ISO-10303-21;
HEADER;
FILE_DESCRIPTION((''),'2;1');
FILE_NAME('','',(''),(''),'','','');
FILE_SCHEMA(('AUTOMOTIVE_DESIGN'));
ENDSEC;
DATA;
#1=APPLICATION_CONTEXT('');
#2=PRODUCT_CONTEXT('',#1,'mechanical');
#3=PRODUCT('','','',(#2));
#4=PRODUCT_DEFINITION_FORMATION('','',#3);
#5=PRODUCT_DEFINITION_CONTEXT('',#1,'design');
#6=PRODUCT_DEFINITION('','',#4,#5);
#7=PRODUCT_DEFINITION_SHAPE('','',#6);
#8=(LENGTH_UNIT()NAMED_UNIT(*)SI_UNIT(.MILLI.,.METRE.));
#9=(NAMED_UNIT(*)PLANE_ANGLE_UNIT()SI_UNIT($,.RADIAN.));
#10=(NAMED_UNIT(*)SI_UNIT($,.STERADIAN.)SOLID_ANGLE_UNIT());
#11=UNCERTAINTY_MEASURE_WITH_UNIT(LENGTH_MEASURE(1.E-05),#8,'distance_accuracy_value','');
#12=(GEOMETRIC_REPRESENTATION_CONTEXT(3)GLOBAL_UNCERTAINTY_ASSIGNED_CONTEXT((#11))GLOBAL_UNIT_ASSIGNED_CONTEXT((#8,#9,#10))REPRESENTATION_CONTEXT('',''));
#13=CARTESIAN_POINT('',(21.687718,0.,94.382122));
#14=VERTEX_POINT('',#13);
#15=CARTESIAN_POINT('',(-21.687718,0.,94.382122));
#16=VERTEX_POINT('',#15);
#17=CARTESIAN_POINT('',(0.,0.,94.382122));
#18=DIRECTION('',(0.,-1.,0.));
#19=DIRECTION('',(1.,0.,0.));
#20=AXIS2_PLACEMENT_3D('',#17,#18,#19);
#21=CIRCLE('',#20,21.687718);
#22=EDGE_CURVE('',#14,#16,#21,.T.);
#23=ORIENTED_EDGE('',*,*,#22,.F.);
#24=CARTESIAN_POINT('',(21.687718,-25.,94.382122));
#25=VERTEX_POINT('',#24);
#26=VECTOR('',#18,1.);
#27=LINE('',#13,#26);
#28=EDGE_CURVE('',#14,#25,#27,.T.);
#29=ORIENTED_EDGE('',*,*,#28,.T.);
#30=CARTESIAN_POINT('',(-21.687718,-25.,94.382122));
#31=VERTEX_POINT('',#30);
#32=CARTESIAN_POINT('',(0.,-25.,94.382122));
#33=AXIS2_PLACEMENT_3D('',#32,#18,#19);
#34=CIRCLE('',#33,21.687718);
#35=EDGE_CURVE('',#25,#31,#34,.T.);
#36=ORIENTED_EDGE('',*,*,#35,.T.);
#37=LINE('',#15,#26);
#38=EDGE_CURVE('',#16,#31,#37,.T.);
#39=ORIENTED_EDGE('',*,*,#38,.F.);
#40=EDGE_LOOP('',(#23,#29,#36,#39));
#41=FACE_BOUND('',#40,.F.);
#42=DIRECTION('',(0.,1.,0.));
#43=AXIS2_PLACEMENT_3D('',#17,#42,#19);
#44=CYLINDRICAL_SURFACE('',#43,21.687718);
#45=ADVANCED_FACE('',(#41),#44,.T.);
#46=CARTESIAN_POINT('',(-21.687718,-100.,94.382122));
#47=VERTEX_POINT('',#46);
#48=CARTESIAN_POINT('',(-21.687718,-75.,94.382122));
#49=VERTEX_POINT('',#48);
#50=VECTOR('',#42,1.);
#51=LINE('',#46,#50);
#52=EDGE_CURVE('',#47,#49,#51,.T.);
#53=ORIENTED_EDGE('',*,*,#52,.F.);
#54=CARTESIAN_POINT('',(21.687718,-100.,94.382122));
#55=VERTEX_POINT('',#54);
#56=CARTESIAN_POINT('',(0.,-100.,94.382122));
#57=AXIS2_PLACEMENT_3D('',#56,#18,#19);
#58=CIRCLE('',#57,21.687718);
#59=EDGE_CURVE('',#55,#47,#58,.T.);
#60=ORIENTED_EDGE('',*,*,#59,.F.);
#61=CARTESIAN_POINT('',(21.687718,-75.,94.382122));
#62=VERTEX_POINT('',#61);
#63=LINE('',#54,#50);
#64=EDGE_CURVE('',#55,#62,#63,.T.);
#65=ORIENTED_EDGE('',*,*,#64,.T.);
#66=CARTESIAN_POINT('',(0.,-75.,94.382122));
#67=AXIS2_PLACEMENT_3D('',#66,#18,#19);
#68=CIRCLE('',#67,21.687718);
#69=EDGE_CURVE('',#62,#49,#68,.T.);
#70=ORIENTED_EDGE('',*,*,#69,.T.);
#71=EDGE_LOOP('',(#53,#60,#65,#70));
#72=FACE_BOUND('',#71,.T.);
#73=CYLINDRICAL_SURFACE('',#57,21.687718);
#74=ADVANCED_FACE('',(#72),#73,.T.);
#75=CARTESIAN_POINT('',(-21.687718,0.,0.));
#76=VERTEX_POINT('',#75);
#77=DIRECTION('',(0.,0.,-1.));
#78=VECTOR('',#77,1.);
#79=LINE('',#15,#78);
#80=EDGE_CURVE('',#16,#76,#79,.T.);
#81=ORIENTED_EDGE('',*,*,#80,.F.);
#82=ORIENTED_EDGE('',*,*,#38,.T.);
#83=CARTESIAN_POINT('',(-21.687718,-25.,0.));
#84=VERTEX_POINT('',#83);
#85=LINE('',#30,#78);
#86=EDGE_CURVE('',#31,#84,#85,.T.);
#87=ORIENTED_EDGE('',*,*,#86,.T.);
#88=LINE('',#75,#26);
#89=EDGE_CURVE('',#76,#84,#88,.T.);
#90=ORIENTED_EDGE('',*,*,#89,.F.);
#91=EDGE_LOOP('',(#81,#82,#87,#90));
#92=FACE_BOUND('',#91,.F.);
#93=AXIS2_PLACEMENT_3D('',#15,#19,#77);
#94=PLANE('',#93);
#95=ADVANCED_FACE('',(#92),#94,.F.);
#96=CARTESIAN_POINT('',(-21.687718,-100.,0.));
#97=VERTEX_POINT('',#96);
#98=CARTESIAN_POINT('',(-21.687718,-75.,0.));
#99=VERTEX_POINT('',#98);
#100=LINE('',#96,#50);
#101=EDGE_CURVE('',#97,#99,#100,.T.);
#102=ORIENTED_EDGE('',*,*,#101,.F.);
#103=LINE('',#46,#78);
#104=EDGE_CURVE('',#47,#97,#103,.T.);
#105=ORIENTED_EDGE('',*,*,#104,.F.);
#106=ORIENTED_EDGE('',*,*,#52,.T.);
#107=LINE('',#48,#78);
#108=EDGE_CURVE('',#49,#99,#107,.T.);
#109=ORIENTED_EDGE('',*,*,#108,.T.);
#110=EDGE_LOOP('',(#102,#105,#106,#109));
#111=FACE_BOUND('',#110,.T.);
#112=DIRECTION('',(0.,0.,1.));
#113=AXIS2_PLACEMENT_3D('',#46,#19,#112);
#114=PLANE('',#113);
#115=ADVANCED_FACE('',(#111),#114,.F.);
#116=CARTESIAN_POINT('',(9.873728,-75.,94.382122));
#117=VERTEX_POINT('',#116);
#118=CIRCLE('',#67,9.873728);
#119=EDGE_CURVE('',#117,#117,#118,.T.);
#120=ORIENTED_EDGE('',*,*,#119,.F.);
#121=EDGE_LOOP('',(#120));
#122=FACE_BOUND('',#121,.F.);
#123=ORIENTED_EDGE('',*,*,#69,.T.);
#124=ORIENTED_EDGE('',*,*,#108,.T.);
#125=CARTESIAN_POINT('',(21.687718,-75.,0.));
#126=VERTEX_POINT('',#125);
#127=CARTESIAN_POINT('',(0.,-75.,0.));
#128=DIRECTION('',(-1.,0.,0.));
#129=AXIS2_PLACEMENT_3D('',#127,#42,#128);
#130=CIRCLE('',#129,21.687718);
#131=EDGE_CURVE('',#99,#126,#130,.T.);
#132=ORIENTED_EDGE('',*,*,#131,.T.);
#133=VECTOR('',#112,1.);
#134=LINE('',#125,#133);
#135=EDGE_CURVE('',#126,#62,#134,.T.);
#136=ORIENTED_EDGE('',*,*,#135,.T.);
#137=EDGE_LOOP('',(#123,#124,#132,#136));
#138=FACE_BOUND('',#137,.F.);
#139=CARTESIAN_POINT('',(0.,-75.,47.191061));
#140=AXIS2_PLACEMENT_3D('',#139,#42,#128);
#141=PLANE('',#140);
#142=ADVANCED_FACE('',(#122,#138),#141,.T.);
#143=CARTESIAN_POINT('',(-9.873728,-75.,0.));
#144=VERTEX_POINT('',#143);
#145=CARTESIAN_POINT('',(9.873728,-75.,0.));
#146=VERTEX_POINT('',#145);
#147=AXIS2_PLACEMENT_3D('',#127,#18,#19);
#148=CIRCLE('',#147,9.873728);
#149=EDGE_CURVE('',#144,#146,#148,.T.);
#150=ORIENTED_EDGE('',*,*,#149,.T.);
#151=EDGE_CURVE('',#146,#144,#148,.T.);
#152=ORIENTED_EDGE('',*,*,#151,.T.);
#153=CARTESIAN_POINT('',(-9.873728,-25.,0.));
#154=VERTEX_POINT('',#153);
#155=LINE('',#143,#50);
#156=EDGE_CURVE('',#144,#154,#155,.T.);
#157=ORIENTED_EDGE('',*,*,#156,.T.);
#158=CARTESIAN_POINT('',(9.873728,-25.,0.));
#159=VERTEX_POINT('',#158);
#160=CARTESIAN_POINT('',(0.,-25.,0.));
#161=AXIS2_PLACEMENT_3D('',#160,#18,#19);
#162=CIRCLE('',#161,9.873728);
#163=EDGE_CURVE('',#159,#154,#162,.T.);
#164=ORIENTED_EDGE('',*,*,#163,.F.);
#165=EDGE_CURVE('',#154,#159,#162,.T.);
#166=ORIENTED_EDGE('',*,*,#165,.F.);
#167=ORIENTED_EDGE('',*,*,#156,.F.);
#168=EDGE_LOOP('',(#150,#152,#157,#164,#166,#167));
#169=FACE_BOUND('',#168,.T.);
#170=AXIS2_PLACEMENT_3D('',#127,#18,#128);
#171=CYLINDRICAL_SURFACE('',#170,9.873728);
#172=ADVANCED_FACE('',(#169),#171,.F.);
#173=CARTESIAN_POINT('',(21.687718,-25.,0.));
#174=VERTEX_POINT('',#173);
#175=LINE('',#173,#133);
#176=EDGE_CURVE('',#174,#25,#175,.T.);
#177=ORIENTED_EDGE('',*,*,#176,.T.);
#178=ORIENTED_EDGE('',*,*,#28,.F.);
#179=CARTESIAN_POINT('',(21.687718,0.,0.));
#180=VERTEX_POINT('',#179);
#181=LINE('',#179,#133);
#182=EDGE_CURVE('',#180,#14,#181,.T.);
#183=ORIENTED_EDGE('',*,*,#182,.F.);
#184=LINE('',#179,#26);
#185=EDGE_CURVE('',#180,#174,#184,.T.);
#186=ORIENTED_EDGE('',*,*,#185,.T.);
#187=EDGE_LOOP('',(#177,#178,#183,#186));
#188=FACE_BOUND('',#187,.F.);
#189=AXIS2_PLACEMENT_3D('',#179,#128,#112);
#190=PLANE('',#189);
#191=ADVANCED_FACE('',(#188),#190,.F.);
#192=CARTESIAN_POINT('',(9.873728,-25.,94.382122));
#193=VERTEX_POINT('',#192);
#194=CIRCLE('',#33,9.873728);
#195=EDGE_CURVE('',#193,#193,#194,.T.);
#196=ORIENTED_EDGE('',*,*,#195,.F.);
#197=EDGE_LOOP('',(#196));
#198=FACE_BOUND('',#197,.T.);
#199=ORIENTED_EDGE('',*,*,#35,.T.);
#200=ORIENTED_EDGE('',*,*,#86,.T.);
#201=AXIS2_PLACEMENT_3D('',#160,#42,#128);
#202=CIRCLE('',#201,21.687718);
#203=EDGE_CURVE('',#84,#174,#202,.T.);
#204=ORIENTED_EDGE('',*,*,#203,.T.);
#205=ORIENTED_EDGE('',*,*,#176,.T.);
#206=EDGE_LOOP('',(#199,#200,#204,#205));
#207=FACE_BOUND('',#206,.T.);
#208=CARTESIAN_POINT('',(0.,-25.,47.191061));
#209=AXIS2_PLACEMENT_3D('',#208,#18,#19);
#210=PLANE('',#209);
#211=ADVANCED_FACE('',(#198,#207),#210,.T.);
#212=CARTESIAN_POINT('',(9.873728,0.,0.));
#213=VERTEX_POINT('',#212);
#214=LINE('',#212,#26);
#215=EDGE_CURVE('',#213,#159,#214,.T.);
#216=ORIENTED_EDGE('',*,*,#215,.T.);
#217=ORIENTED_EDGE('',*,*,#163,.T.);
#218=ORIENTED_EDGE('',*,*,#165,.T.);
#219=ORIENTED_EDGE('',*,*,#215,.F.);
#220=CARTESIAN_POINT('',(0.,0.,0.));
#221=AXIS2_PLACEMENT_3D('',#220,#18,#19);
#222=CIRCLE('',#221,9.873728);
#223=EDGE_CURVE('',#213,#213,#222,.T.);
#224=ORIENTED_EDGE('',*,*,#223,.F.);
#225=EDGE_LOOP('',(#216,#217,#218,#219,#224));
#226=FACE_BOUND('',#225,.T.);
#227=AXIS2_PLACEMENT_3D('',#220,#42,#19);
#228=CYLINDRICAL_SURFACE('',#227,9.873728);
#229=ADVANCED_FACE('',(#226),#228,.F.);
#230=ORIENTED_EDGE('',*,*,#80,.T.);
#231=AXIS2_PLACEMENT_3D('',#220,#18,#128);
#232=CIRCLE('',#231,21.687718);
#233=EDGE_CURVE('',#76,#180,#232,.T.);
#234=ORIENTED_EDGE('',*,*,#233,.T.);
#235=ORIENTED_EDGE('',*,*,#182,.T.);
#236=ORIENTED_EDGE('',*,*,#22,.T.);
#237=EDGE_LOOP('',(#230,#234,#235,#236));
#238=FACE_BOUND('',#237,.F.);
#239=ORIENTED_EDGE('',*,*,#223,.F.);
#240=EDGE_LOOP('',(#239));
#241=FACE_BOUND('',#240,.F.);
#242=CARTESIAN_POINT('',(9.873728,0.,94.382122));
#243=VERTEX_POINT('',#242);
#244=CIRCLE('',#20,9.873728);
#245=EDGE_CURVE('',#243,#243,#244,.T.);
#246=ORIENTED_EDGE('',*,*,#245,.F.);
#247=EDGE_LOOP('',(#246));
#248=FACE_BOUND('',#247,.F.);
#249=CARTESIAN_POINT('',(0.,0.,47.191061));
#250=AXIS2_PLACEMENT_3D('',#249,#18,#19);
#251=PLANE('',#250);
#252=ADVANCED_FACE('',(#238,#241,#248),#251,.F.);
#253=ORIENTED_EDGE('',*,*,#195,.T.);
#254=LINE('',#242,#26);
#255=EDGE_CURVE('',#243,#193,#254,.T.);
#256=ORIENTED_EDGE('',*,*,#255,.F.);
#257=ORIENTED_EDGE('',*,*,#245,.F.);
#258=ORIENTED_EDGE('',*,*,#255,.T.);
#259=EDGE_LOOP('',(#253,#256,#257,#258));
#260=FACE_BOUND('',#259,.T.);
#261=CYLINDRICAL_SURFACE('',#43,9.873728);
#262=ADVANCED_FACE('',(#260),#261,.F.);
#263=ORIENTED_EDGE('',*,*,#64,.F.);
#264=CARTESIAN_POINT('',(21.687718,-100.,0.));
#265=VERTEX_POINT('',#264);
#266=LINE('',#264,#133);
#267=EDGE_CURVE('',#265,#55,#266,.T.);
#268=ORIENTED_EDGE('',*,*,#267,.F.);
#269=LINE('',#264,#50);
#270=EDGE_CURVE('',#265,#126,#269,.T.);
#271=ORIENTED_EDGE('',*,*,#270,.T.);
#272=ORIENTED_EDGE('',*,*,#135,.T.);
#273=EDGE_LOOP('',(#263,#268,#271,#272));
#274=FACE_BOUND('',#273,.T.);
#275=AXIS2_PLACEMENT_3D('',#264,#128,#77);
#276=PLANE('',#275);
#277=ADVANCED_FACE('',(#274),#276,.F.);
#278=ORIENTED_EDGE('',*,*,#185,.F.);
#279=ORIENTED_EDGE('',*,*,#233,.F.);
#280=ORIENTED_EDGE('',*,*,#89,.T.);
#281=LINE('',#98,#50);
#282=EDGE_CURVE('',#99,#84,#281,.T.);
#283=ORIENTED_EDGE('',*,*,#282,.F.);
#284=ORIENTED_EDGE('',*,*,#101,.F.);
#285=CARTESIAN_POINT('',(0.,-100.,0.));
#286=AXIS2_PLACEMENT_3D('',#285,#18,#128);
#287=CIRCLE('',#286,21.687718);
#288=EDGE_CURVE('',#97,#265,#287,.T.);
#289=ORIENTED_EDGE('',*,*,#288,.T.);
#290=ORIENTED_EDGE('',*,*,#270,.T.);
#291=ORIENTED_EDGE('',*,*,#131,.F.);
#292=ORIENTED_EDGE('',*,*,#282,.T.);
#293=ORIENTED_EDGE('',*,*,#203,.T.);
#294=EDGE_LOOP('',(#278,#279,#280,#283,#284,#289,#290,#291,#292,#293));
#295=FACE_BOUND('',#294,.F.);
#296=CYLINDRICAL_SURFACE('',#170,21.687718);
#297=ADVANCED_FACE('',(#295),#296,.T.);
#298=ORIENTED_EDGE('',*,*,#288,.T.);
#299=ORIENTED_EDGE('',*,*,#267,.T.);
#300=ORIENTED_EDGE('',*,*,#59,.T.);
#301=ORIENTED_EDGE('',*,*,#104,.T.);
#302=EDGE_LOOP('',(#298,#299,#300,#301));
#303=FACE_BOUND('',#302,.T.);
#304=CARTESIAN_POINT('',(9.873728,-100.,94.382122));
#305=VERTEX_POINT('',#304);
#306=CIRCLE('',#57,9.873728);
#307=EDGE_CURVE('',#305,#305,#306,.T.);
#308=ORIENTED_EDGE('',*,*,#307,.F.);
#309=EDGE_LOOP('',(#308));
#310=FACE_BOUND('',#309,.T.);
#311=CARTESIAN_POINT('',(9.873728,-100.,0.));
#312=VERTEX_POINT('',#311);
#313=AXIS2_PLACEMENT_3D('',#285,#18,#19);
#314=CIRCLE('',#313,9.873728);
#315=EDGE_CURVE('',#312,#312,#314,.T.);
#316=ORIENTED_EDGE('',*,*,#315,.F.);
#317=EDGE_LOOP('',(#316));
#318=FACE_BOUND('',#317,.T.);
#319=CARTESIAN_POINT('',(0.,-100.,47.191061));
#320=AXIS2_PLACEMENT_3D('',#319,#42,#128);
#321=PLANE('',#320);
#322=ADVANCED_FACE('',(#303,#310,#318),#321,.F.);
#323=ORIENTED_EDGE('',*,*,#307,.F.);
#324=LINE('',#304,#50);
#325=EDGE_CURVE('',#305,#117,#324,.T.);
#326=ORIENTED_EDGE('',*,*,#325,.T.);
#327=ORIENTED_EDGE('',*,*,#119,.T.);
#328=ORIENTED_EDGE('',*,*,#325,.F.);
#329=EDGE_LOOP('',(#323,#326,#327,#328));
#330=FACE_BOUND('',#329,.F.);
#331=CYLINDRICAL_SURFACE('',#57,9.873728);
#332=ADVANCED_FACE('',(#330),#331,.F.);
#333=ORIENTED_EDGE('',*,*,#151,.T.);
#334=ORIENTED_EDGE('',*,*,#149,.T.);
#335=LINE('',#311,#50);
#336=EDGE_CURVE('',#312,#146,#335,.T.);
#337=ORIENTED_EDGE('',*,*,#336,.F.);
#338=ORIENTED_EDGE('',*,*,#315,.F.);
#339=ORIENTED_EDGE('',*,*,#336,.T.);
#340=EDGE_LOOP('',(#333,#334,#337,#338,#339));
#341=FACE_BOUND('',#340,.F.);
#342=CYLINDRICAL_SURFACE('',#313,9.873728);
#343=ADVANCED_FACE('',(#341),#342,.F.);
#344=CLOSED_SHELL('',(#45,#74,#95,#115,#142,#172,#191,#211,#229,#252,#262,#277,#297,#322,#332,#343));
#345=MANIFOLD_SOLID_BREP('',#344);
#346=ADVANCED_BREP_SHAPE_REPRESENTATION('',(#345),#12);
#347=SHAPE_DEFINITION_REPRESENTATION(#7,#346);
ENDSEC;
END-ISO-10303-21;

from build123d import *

# Parameters (mm, degrees)
F0_R     = 9.8737284495
F1_DEPTH = 25
F4_R     = 9.8737284495
F5_DEPTH = 50


with BuildPart() as f1:
    # F0 (on Front) → F1 (new body)
    with BuildSketch(Plane.XZ):
        with BuildLine():
            Line((-21.6877176851, 94.382122159), (-21.6877176851, 0))
            ThreePointArc((-21.6877176851, 0), (0, -21.6877176851), (21.6877176851, 0))
            Line((21.6877176851, 0), (21.6877176851, 94.382122159))
            ThreePointArc((21.6877176851, 94.382122159), (0, 116.0698398441), (-21.6877176851, 94.382122159))
        make_face()
        Circle(F0_R, mode=Mode.SUBTRACT)
        with Locations((0, 94.382122159)):
            Circle(F0_R, mode=Mode.SUBTRACT)
    extrude(amount=F1_DEPTH)


with BuildPart() as f3_1:
    # F3: instance of F1
    add(f1.part.mirror(Plane.XZ.offset(50)))


with BuildPart() as f1_1:
    add(f1.part)

    add(f3_1.part)  # F5 merges F3_1
    # F4 (on face) → F5 (join, through all)
    with BuildSketch(Plane(origin=(0, -75, 0), x_dir=(-1, 0, 0), z_dir=(0, 1, 0))):
        with BuildLine():
            ThreePointArc((-21.6877176851, 0), (0, -21.6877176851), (21.6877176851, 0))
            ThreePointArc((21.6877176851, 0), (0, 21.6877176851), (-21.6877176851, 0))
        make_face()
        Circle(F4_R, mode=Mode.SUBTRACT)
    extrude(amount=F5_DEPTH)


solid = f1_1.part
